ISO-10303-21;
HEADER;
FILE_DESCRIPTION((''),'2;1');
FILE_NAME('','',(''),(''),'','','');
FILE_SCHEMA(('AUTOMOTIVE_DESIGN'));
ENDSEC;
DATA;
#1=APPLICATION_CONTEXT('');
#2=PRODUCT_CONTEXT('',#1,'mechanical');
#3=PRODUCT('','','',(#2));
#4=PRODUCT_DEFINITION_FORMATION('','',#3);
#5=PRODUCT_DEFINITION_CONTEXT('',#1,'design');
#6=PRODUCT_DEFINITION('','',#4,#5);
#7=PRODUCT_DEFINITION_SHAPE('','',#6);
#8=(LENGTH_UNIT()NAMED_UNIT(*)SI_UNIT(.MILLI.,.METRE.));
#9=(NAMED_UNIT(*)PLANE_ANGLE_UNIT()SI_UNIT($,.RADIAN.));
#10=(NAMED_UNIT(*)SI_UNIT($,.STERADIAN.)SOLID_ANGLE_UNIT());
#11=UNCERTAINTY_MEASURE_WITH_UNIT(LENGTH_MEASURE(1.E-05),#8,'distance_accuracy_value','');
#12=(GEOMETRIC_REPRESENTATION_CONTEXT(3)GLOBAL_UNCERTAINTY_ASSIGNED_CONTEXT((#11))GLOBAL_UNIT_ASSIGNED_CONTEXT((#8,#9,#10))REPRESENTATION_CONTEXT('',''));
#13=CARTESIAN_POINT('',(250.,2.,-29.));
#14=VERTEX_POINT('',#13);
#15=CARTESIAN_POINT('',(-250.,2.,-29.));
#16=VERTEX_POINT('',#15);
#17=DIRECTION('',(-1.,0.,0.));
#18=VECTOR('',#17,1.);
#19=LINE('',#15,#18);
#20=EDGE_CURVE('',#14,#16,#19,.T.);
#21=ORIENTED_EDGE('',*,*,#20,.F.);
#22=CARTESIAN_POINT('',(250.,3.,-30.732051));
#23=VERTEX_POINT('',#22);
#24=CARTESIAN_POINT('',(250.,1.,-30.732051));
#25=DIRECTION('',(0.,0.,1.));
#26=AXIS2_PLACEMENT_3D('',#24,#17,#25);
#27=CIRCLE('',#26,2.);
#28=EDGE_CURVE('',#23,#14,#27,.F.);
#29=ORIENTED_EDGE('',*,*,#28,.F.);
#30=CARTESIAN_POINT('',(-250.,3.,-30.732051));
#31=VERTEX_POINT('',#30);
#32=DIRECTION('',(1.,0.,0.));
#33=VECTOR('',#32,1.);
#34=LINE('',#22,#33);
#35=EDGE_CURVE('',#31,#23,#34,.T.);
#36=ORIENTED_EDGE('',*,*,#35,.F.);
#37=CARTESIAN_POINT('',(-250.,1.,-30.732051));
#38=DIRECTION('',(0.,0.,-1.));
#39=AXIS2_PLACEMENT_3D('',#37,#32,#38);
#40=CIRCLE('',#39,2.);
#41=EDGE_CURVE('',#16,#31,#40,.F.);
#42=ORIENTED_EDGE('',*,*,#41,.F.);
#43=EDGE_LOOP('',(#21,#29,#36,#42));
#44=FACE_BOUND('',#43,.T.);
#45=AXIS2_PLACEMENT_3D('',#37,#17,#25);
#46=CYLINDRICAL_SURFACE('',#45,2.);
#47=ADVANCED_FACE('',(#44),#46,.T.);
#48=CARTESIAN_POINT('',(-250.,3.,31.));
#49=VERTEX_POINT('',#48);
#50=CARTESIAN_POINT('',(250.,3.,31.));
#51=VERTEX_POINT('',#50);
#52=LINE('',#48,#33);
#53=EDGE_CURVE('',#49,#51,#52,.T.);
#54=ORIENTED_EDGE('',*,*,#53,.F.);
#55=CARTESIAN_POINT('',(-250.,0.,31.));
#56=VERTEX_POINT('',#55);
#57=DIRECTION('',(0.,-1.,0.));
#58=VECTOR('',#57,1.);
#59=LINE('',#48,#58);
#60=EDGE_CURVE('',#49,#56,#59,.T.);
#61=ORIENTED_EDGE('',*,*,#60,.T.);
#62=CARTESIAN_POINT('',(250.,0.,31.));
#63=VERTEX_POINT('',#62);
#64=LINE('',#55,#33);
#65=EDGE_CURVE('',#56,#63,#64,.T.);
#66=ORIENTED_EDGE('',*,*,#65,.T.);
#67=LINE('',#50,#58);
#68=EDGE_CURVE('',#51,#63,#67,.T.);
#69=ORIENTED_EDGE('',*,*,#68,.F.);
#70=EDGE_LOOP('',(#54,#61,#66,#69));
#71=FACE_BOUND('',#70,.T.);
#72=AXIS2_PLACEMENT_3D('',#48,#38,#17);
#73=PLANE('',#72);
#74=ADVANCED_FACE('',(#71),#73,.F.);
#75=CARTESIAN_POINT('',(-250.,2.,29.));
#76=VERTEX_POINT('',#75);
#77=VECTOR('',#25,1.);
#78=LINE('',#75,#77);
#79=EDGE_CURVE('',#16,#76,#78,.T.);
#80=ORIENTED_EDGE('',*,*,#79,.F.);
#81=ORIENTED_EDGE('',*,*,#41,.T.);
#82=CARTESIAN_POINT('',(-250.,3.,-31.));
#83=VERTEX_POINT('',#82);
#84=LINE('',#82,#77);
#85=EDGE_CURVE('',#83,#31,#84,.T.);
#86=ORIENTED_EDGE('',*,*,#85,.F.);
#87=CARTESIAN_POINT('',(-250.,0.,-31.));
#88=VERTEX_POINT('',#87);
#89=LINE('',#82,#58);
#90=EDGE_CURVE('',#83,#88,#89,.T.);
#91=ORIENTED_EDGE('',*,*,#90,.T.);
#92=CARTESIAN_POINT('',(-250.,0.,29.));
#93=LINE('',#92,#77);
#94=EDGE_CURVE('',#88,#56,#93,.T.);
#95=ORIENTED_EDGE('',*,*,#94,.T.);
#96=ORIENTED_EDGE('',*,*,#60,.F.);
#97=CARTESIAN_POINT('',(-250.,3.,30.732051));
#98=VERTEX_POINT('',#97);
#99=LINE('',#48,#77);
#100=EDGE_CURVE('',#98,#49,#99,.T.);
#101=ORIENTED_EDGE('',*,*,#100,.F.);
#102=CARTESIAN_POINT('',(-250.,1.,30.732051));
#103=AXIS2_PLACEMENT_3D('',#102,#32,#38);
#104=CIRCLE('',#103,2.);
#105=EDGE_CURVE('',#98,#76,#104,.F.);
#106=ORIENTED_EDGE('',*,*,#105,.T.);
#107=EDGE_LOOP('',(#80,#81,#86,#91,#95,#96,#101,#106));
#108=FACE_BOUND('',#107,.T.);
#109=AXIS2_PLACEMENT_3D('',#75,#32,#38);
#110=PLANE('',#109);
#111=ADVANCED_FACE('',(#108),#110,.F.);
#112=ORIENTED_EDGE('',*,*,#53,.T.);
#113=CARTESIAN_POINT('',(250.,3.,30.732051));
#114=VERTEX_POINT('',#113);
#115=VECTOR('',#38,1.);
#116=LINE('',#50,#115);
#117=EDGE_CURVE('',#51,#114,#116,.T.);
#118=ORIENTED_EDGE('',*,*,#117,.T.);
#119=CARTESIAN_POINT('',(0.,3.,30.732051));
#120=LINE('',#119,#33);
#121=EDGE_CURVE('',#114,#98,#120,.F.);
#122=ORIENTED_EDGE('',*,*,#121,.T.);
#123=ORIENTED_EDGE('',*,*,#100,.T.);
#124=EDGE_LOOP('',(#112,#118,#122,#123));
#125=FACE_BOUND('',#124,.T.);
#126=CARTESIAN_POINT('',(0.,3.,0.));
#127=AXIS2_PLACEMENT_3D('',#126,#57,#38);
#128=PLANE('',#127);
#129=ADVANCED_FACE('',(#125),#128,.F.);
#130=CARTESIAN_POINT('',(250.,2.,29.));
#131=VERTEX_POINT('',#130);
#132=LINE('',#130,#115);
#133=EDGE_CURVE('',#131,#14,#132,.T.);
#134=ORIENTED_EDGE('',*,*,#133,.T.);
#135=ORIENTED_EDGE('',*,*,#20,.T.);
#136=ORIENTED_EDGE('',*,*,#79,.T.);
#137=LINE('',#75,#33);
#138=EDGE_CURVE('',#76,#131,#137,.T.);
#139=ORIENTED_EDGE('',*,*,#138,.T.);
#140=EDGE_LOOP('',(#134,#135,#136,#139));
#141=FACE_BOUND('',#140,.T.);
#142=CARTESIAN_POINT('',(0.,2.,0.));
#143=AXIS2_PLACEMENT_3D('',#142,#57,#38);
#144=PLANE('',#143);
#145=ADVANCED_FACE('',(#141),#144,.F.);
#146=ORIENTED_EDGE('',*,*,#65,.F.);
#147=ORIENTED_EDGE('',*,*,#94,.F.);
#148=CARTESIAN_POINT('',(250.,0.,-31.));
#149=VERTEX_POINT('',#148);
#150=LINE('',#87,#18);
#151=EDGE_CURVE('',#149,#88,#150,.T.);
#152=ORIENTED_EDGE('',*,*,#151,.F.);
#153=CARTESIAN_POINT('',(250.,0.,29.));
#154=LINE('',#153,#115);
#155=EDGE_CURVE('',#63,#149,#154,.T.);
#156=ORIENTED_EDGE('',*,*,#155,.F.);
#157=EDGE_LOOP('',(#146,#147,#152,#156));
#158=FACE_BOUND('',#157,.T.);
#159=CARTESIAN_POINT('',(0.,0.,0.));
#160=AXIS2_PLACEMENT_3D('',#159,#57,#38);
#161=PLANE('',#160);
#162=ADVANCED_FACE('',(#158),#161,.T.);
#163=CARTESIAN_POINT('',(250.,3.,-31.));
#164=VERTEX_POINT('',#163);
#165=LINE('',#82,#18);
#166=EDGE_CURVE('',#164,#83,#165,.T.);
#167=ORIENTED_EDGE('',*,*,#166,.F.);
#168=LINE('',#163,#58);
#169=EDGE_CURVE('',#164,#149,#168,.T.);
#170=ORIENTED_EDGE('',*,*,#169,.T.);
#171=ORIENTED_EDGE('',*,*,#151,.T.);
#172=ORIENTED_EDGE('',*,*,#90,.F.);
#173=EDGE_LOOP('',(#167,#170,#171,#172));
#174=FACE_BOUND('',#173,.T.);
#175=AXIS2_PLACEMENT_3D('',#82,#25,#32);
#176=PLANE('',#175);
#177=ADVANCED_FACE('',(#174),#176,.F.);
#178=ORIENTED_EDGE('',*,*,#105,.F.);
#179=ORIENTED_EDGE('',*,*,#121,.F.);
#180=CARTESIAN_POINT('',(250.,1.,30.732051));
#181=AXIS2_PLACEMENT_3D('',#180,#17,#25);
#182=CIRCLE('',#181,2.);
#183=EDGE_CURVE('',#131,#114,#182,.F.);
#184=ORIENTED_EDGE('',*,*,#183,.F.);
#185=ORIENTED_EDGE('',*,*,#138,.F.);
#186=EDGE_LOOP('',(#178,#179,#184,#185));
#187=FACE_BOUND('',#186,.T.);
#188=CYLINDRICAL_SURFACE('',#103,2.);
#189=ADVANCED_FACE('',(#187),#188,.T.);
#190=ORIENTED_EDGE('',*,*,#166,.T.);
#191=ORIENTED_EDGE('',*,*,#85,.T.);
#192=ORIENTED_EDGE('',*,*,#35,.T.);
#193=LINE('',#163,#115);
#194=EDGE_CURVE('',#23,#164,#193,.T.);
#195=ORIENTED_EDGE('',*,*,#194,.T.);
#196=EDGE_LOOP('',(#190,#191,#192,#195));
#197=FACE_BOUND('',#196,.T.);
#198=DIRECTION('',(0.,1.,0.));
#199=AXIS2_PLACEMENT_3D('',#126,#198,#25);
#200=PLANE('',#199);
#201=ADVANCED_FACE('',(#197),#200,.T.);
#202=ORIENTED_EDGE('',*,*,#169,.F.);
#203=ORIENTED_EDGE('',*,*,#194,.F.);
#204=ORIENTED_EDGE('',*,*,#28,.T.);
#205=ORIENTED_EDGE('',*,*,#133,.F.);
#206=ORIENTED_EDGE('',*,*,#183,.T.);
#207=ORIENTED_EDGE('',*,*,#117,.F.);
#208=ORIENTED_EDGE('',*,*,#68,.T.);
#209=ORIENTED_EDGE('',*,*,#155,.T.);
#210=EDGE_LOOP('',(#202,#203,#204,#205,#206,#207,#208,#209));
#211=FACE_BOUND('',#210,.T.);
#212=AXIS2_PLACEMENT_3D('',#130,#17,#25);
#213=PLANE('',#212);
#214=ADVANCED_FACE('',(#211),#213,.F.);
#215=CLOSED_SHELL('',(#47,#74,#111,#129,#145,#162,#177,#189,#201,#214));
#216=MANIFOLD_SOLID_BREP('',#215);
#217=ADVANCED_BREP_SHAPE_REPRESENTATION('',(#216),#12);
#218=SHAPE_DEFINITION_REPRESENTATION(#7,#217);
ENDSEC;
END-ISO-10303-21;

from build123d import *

# Parameters (mm, degrees)
CROQUIS1_W              = 500
CROQUIS1_H              = 58
SALIENTE_EXTRUIR1_DEPTH = 2
CROQUIS4_W              = 500
CROQUIS4_H              = 2
SALIENTE_EXTRUIR2_DEPTH = 3
REDONDEO1_R             = 2


with BuildPart() as part:
    # Croquis1 → Saliente-Extruir1 (new body)
    with BuildSketch(Plane(origin=(0, 0, 0), x_dir=(1, 0, 0), z_dir=(0, 1, 0))):
        Rectangle(CROQUIS1_W, CROQUIS1_H)
    extrude(amount=SALIENTE_EXTRUIR1_DEPTH)

    # Croquis4 → Saliente-Extruir2 (add)
    with BuildSketch(Plane(origin=(0, 0, 0), x_dir=(1, 0, 0), z_dir=(0, 1, 0))):
        with Locations((0, 30)):
            Rectangle(CROQUIS4_W, CROQUIS4_H)
        with Locations((0, -30)):
            Rectangle(CROQUIS4_W, CROQUIS4_H)
    extrude(amount=SALIENTE_EXTRUIR2_DEPTH)

    # Redondeo1
    # the kernel refuses this fillet: 2 mm, written as the material it takes off along each edge
    with BuildSketch(Plane(origin=(254.330127019, 3, -29), x_dir=(0, 0, -1), z_dir=(-1, 0, 0))) as redondeo1_piece_1:
        with BuildLine():
            CenterArc((1.732050808, 2), REDONDEO1_R, 210, 60)
            Line((0, 1), (-0.034641016, 0.98))
            ThreePointArc((-0.034641016, 0.98), (-0.04, 0.5), (-0.04, 0))
            Line((-0.04, 0), (0, -0.04))
            Line((0, -0.04), (1.732050808, -0.04))
            Line((1.732050808, -0.04), (1.732050808, 0))
        make_face()
    extrude(amount=508.660254038, mode=Mode.SUBTRACT)
    with BuildSketch(Plane(origin=(-254.330127019, 3, 29), x_dir=(0, -1, 0), z_dir=(1, 0, 0))) as redondeo1_piece_2:
        with BuildLine():
            CenterArc((2, -1.732050808), REDONDEO1_R, 120, 60)
            Line((0, -1.732050808), (-0.04, -1.732050808))
            Line((-0.04, -1.732050808), (-0.04, 0))
            Line((-0.04, 0), (0, 0.04))
            ThreePointArc((0, 0.04), (0.5, 0.04), (0.98, 0.034641016))
            Line((0.98, 0.034641016), (1, 0))
        make_face()
    extrude(amount=508.660254038, mode=Mode.SUBTRACT)


solid = part.part
